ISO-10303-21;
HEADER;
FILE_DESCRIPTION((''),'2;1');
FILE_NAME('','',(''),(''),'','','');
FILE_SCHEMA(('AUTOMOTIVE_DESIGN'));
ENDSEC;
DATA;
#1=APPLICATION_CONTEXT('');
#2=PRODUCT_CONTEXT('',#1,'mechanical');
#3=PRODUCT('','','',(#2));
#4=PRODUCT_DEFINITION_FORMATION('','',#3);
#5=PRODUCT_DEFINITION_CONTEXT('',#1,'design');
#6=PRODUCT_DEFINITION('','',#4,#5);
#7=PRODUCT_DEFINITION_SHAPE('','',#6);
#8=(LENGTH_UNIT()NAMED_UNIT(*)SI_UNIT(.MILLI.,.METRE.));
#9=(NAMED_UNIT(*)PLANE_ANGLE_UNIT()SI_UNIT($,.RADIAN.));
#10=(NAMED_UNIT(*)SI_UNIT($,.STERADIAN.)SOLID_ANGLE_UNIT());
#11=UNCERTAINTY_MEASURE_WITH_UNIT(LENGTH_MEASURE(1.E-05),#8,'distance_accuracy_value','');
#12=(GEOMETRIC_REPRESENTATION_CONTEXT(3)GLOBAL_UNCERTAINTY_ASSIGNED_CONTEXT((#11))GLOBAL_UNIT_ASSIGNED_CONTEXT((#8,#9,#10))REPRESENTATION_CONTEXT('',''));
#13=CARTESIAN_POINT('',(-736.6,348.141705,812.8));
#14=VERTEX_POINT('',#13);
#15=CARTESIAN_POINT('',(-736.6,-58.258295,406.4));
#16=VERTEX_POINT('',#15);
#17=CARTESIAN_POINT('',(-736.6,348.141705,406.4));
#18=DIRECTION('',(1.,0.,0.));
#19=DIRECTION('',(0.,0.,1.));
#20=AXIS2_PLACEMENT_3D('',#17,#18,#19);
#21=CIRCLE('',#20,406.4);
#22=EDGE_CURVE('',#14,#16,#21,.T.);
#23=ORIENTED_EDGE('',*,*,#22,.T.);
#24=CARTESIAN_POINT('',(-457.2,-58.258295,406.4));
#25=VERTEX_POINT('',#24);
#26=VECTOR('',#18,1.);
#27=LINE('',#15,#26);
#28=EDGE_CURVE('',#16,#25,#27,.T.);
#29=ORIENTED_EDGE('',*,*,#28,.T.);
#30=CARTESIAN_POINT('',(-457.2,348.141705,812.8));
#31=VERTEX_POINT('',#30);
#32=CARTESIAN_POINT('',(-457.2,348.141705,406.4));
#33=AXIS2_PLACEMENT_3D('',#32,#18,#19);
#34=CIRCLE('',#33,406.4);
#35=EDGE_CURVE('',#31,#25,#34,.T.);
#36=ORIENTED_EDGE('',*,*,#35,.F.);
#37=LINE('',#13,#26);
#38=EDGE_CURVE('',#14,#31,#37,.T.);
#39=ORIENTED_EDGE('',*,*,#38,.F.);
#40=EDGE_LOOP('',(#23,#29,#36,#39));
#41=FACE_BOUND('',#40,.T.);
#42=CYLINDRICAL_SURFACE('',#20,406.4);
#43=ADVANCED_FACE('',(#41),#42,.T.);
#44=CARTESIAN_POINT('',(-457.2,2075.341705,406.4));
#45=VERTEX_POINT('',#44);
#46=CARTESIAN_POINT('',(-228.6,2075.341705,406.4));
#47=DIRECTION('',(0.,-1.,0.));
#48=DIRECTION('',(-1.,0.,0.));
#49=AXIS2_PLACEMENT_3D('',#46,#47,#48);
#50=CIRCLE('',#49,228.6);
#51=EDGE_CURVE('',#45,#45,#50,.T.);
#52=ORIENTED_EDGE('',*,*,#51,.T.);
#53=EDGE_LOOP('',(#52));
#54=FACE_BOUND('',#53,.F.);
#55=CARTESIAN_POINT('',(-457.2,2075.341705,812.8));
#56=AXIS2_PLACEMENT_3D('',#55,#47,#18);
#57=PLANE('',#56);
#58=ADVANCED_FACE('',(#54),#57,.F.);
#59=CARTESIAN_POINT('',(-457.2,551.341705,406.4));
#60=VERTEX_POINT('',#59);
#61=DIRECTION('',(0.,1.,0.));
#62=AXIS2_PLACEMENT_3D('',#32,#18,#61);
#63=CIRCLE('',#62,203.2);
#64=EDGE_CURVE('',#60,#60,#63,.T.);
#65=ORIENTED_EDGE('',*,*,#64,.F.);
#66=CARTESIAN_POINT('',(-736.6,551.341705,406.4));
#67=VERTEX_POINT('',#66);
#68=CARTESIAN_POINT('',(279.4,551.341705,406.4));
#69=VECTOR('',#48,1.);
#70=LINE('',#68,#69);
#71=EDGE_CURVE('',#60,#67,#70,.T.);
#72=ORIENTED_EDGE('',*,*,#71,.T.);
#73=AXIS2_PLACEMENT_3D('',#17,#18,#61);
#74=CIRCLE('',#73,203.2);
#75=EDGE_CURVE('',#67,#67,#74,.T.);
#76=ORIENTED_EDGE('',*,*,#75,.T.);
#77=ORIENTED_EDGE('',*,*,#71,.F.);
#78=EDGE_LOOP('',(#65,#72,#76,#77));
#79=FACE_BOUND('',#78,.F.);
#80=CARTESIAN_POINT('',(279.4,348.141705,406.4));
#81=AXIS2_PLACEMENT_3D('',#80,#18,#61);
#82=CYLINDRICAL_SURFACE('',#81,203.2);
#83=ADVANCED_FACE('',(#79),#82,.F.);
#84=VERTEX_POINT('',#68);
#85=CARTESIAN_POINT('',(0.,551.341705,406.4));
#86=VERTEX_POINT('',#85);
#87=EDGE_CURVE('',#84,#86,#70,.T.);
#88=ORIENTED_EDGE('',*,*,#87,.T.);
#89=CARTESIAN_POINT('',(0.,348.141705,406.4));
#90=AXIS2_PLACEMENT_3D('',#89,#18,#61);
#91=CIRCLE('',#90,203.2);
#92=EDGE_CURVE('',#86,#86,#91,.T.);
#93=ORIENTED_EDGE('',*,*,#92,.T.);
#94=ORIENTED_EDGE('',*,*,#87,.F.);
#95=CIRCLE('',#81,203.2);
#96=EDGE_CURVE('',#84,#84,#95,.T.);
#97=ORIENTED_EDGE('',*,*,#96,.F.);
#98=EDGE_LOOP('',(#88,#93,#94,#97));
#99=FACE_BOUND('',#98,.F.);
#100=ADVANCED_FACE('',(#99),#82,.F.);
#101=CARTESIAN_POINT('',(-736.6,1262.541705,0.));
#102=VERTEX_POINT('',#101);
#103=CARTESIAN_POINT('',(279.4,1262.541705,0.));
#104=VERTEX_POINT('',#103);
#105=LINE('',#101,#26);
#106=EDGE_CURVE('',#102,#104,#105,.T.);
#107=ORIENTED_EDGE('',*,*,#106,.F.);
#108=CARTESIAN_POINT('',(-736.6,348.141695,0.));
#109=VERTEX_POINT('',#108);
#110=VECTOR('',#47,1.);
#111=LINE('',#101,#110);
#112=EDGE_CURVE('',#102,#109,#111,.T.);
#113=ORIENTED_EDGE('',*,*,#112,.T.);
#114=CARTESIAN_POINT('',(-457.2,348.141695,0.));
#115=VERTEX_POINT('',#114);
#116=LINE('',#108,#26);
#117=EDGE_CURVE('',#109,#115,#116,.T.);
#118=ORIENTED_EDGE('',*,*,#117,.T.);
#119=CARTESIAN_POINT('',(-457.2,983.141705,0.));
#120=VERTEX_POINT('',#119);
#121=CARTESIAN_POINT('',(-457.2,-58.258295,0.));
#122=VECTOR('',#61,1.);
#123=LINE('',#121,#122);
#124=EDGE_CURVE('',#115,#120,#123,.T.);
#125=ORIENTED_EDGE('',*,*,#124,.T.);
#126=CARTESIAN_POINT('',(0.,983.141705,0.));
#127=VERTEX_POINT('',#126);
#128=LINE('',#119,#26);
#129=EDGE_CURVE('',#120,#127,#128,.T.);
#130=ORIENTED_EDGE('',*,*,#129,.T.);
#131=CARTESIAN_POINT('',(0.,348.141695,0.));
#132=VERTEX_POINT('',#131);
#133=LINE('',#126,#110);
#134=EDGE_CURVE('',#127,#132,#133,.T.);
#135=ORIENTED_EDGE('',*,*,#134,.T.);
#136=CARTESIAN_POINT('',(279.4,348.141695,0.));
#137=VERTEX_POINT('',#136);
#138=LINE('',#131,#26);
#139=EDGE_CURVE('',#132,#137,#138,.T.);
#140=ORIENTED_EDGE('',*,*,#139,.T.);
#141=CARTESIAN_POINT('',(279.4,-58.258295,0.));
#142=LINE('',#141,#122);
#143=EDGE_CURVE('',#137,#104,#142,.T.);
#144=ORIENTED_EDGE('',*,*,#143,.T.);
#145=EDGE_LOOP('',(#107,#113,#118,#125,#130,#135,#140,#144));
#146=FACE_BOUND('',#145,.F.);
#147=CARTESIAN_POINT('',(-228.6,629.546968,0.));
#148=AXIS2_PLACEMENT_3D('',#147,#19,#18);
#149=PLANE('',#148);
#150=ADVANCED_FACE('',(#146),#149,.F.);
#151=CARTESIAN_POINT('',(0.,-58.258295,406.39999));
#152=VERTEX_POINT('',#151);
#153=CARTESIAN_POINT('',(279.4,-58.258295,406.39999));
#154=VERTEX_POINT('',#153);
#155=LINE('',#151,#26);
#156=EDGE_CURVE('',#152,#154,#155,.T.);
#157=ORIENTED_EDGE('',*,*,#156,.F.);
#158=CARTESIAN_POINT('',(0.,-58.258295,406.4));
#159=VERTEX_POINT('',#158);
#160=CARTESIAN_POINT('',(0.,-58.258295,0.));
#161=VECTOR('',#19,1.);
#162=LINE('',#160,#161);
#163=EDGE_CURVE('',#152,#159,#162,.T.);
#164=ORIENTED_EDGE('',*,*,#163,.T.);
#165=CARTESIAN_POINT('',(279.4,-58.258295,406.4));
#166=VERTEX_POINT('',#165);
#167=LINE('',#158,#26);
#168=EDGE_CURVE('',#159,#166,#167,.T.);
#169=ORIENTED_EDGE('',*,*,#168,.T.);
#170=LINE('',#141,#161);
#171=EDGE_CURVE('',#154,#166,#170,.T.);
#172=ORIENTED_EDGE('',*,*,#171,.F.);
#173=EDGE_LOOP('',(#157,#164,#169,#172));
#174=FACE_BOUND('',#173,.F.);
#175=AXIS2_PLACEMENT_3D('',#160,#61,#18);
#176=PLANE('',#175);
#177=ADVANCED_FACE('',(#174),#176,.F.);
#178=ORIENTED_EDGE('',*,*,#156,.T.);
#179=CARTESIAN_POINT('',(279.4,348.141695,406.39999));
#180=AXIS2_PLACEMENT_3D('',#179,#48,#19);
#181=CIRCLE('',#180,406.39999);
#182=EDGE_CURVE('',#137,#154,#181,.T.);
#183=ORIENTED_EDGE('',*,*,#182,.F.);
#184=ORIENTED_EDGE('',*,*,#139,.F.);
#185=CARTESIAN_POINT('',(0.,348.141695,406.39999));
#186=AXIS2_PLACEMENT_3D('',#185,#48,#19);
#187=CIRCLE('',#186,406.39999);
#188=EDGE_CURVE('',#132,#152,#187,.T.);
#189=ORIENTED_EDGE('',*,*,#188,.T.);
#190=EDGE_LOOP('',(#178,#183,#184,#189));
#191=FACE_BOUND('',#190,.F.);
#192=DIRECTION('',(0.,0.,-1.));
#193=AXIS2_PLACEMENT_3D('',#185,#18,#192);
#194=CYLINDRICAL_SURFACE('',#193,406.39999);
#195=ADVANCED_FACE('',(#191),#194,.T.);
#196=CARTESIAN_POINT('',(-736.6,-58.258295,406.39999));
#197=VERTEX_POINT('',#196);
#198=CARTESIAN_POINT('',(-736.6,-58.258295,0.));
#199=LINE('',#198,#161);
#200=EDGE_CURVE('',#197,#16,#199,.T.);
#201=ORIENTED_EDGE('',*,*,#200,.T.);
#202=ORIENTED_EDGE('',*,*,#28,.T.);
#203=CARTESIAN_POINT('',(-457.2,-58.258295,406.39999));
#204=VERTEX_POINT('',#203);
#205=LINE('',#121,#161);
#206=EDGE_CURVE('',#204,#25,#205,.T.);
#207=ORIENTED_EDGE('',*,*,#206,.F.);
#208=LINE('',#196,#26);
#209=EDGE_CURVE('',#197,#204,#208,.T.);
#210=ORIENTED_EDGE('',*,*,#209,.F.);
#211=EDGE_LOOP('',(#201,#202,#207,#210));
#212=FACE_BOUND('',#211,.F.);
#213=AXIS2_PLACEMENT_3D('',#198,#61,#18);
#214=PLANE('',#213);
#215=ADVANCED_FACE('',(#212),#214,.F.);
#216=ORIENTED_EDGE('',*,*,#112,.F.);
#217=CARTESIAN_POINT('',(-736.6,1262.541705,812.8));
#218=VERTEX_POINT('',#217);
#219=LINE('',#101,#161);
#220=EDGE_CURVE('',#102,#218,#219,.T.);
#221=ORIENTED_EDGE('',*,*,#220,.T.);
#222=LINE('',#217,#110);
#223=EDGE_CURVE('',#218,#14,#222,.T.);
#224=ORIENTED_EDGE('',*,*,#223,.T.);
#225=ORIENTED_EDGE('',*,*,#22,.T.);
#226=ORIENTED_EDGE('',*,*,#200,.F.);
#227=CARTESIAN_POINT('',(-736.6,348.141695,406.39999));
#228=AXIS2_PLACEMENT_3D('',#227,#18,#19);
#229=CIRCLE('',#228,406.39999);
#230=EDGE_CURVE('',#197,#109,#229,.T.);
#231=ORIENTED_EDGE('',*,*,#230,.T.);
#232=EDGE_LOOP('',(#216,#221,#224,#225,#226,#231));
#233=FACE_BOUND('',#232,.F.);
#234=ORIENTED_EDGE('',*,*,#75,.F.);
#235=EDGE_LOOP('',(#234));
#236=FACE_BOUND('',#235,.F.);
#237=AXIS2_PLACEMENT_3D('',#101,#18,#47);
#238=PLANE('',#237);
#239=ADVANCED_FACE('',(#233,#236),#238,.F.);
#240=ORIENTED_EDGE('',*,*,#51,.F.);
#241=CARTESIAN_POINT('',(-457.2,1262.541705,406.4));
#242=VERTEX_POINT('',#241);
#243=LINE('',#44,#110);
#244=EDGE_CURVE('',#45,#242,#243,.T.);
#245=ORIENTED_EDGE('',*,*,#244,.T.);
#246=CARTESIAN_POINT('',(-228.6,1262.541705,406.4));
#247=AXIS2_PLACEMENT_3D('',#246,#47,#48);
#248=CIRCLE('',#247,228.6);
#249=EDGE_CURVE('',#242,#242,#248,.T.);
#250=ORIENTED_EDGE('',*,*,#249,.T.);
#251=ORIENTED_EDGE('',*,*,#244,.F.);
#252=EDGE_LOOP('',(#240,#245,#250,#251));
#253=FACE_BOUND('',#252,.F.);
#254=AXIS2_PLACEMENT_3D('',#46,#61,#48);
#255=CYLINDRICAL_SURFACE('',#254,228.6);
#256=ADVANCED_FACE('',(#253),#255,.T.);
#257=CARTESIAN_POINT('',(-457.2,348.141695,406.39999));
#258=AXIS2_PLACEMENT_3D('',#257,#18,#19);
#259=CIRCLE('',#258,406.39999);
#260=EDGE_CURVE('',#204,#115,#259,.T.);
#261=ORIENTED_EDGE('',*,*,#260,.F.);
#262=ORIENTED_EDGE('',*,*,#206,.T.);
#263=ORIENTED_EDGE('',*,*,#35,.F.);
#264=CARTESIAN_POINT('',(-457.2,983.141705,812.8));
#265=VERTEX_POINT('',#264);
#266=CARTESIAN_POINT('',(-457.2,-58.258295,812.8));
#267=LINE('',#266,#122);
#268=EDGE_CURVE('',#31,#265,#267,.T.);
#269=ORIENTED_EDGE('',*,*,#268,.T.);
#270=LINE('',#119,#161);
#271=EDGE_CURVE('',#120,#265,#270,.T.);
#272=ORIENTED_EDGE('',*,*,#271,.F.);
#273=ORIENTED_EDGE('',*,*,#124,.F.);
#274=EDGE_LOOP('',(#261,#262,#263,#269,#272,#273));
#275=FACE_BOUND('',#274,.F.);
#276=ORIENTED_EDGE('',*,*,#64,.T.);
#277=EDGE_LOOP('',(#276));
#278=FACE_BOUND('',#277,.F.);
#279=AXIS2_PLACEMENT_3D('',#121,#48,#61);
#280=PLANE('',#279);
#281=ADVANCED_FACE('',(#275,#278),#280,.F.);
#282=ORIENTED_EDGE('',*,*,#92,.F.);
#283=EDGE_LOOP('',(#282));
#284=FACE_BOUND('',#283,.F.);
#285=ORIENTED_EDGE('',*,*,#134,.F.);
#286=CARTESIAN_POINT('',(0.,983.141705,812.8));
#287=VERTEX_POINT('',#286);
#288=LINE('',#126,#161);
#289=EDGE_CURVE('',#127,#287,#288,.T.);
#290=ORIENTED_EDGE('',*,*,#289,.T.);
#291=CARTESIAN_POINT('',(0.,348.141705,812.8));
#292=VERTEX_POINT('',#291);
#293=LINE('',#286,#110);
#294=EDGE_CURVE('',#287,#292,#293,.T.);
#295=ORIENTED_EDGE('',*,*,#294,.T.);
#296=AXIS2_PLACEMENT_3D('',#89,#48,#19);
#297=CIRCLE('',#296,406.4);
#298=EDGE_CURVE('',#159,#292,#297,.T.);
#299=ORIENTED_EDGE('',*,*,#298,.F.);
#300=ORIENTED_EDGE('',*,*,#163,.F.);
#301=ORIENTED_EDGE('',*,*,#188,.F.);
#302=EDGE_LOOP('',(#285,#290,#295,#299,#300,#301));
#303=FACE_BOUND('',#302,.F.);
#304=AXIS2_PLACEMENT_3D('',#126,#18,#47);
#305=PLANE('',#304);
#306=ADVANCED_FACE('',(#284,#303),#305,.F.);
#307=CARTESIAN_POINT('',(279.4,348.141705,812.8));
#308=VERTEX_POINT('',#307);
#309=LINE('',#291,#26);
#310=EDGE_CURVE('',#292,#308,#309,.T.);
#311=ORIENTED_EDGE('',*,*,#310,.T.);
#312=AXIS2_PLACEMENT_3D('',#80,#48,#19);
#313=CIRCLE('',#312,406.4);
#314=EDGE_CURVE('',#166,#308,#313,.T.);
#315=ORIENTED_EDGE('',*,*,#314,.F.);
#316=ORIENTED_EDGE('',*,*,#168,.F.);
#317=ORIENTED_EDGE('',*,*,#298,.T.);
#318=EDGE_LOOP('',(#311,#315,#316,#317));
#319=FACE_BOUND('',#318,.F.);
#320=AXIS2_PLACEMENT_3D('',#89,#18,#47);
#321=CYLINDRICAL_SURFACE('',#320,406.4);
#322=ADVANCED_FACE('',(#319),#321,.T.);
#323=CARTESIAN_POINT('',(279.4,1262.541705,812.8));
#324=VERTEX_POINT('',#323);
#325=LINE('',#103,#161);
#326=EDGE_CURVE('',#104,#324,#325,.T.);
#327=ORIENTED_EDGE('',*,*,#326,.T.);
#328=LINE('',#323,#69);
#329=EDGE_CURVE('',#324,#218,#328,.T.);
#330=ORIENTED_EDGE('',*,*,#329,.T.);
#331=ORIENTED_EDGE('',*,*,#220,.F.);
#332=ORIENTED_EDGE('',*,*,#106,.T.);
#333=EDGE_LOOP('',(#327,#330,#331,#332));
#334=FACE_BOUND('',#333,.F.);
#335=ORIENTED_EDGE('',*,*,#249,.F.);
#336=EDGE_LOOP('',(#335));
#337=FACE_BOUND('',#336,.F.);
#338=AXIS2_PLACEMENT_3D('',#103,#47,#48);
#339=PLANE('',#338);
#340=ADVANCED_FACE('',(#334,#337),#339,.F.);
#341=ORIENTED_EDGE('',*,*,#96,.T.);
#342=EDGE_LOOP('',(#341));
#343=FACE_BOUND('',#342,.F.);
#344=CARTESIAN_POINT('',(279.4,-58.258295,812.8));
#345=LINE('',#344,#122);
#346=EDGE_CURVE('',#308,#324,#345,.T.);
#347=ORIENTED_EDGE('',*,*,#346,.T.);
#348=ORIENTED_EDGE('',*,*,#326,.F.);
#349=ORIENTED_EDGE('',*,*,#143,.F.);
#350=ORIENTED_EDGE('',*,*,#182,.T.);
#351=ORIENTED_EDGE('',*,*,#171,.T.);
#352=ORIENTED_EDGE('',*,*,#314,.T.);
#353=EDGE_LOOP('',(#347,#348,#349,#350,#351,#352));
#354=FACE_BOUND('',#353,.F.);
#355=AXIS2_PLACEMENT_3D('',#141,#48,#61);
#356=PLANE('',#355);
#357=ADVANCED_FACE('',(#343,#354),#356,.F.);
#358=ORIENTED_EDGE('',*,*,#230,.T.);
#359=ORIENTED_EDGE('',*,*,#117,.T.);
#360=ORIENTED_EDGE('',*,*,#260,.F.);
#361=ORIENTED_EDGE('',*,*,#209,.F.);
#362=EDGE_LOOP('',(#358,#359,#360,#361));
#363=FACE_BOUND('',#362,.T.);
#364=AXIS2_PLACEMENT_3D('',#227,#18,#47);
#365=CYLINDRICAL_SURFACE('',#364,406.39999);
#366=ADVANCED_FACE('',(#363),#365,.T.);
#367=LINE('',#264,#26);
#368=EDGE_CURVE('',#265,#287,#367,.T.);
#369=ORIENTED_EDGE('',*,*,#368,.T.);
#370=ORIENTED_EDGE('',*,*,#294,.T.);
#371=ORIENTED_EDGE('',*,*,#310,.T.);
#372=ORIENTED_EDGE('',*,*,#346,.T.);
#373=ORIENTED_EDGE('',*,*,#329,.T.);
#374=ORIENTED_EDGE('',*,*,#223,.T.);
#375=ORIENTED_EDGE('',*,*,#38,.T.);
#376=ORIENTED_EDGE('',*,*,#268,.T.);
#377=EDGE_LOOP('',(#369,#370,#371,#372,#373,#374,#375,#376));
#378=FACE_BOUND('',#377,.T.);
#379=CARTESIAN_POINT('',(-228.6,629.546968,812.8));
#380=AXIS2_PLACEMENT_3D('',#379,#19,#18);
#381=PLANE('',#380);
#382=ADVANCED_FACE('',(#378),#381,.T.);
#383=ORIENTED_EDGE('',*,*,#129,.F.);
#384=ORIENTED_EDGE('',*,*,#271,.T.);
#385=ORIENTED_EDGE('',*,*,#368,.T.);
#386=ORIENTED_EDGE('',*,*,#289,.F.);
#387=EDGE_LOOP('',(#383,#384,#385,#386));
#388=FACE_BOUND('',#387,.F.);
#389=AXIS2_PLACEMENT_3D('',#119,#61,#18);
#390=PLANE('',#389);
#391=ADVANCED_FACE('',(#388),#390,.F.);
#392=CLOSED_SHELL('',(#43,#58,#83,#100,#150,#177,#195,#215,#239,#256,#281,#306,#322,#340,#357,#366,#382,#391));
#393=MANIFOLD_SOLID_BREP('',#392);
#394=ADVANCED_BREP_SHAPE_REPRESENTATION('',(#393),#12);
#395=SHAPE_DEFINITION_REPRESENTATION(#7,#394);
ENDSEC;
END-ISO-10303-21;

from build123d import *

# Parameters (mm, degrees)
F1_DEPTH = 812.8
F2_W     = 457.2
F2_H     = 812.8
F3_DEPTH = 812.8
F4_R     = 406.4
F6_DEPTH = 812.8
F7_R     = 406.39999
F8_R     = 203.2
F9_DEPTH = 1016.001


# Not quite as in the source:
# - a fillet or chamfer is up to 0.001 mm smaller than in the source, because OpenCascade refuses the exact size


with BuildPart() as f1:
    # F0 (on Top) → F1 (new body)
    with BuildSketch(Plane.XY):
        Polygon((0, 983.1417049408), (0, -58.2582950592), (279.4, -58.2582950592), (279.4, 1262.5417049408), (-736.6, 1262.5417049408), (-736.6, -58.2582950592), (-457.2, -58.2582950592), (-457.2, 983.1417049408), align=None)
    extrude(amount=F1_DEPTH)

    # F2 (on face) → F3 (join)
    with BuildSketch(Plane.XY.offset(812.8)):
        with Locations((-228.6, 1668.9417049408)):
            Rectangle(F2_W, F2_H)
    extrude(amount=-F3_DEPTH)

    # F4
    f4_edges = [f1.edges().sort_by_distance(p)[0] for p in [
        (139.7, -58.258295, 812.8),
        (-596.9, -58.258295, 812.8),
    ]]
    fillet(f4_edges, radius=F4_R)

    # F5 (on face) → F6 (cut)
    with BuildSketch(Plane(origin=(0, 2075.3417049408, 0), x_dir=(-1, 0, 0), z_dir=(0, 1, 0))):
        with BuildLine():
            ThreePointArc((0, 406.4), (228.6, 635), (457.2, 406.4))
            Line((457.2, 406.4), (457.2, 812.8))
            Line((457.2, 812.8), (0, 812.8))
            Line((0, 812.8), (0, 406.4))
        make_face()
        with BuildLine():
            Line((457.2, 0), (457.2, 406.4))
            ThreePointArc((457.2, 406.4), (228.6, 177.8), (0, 406.4))
            Line((0, 406.4), (0, 0))
            Line((0, 0), (457.2, 0))
        make_face()
    extrude(amount=-F6_DEPTH, mode=Mode.SUBTRACT)

    # F7 (radius 406.4 in the source; OpenCascade refuses exactly that, so slightly less here)
    f7_edges = [f1.edges().sort_by_distance(p)[0] for p in [
        (139.7, -58.258295, 0),
        (-596.9, -58.258295, 0),
    ]]
    fillet(f7_edges, radius=F7_R)

    # F8 (on face) → F9 (cut, through all)
    with BuildSketch(Plane.YZ.offset(279.4)):
        with Locations((348.1417049408, 406.4)):
            Circle(F8_R)
    extrude(amount=-F9_DEPTH, mode=Mode.SUBTRACT)


solid = f1.part
